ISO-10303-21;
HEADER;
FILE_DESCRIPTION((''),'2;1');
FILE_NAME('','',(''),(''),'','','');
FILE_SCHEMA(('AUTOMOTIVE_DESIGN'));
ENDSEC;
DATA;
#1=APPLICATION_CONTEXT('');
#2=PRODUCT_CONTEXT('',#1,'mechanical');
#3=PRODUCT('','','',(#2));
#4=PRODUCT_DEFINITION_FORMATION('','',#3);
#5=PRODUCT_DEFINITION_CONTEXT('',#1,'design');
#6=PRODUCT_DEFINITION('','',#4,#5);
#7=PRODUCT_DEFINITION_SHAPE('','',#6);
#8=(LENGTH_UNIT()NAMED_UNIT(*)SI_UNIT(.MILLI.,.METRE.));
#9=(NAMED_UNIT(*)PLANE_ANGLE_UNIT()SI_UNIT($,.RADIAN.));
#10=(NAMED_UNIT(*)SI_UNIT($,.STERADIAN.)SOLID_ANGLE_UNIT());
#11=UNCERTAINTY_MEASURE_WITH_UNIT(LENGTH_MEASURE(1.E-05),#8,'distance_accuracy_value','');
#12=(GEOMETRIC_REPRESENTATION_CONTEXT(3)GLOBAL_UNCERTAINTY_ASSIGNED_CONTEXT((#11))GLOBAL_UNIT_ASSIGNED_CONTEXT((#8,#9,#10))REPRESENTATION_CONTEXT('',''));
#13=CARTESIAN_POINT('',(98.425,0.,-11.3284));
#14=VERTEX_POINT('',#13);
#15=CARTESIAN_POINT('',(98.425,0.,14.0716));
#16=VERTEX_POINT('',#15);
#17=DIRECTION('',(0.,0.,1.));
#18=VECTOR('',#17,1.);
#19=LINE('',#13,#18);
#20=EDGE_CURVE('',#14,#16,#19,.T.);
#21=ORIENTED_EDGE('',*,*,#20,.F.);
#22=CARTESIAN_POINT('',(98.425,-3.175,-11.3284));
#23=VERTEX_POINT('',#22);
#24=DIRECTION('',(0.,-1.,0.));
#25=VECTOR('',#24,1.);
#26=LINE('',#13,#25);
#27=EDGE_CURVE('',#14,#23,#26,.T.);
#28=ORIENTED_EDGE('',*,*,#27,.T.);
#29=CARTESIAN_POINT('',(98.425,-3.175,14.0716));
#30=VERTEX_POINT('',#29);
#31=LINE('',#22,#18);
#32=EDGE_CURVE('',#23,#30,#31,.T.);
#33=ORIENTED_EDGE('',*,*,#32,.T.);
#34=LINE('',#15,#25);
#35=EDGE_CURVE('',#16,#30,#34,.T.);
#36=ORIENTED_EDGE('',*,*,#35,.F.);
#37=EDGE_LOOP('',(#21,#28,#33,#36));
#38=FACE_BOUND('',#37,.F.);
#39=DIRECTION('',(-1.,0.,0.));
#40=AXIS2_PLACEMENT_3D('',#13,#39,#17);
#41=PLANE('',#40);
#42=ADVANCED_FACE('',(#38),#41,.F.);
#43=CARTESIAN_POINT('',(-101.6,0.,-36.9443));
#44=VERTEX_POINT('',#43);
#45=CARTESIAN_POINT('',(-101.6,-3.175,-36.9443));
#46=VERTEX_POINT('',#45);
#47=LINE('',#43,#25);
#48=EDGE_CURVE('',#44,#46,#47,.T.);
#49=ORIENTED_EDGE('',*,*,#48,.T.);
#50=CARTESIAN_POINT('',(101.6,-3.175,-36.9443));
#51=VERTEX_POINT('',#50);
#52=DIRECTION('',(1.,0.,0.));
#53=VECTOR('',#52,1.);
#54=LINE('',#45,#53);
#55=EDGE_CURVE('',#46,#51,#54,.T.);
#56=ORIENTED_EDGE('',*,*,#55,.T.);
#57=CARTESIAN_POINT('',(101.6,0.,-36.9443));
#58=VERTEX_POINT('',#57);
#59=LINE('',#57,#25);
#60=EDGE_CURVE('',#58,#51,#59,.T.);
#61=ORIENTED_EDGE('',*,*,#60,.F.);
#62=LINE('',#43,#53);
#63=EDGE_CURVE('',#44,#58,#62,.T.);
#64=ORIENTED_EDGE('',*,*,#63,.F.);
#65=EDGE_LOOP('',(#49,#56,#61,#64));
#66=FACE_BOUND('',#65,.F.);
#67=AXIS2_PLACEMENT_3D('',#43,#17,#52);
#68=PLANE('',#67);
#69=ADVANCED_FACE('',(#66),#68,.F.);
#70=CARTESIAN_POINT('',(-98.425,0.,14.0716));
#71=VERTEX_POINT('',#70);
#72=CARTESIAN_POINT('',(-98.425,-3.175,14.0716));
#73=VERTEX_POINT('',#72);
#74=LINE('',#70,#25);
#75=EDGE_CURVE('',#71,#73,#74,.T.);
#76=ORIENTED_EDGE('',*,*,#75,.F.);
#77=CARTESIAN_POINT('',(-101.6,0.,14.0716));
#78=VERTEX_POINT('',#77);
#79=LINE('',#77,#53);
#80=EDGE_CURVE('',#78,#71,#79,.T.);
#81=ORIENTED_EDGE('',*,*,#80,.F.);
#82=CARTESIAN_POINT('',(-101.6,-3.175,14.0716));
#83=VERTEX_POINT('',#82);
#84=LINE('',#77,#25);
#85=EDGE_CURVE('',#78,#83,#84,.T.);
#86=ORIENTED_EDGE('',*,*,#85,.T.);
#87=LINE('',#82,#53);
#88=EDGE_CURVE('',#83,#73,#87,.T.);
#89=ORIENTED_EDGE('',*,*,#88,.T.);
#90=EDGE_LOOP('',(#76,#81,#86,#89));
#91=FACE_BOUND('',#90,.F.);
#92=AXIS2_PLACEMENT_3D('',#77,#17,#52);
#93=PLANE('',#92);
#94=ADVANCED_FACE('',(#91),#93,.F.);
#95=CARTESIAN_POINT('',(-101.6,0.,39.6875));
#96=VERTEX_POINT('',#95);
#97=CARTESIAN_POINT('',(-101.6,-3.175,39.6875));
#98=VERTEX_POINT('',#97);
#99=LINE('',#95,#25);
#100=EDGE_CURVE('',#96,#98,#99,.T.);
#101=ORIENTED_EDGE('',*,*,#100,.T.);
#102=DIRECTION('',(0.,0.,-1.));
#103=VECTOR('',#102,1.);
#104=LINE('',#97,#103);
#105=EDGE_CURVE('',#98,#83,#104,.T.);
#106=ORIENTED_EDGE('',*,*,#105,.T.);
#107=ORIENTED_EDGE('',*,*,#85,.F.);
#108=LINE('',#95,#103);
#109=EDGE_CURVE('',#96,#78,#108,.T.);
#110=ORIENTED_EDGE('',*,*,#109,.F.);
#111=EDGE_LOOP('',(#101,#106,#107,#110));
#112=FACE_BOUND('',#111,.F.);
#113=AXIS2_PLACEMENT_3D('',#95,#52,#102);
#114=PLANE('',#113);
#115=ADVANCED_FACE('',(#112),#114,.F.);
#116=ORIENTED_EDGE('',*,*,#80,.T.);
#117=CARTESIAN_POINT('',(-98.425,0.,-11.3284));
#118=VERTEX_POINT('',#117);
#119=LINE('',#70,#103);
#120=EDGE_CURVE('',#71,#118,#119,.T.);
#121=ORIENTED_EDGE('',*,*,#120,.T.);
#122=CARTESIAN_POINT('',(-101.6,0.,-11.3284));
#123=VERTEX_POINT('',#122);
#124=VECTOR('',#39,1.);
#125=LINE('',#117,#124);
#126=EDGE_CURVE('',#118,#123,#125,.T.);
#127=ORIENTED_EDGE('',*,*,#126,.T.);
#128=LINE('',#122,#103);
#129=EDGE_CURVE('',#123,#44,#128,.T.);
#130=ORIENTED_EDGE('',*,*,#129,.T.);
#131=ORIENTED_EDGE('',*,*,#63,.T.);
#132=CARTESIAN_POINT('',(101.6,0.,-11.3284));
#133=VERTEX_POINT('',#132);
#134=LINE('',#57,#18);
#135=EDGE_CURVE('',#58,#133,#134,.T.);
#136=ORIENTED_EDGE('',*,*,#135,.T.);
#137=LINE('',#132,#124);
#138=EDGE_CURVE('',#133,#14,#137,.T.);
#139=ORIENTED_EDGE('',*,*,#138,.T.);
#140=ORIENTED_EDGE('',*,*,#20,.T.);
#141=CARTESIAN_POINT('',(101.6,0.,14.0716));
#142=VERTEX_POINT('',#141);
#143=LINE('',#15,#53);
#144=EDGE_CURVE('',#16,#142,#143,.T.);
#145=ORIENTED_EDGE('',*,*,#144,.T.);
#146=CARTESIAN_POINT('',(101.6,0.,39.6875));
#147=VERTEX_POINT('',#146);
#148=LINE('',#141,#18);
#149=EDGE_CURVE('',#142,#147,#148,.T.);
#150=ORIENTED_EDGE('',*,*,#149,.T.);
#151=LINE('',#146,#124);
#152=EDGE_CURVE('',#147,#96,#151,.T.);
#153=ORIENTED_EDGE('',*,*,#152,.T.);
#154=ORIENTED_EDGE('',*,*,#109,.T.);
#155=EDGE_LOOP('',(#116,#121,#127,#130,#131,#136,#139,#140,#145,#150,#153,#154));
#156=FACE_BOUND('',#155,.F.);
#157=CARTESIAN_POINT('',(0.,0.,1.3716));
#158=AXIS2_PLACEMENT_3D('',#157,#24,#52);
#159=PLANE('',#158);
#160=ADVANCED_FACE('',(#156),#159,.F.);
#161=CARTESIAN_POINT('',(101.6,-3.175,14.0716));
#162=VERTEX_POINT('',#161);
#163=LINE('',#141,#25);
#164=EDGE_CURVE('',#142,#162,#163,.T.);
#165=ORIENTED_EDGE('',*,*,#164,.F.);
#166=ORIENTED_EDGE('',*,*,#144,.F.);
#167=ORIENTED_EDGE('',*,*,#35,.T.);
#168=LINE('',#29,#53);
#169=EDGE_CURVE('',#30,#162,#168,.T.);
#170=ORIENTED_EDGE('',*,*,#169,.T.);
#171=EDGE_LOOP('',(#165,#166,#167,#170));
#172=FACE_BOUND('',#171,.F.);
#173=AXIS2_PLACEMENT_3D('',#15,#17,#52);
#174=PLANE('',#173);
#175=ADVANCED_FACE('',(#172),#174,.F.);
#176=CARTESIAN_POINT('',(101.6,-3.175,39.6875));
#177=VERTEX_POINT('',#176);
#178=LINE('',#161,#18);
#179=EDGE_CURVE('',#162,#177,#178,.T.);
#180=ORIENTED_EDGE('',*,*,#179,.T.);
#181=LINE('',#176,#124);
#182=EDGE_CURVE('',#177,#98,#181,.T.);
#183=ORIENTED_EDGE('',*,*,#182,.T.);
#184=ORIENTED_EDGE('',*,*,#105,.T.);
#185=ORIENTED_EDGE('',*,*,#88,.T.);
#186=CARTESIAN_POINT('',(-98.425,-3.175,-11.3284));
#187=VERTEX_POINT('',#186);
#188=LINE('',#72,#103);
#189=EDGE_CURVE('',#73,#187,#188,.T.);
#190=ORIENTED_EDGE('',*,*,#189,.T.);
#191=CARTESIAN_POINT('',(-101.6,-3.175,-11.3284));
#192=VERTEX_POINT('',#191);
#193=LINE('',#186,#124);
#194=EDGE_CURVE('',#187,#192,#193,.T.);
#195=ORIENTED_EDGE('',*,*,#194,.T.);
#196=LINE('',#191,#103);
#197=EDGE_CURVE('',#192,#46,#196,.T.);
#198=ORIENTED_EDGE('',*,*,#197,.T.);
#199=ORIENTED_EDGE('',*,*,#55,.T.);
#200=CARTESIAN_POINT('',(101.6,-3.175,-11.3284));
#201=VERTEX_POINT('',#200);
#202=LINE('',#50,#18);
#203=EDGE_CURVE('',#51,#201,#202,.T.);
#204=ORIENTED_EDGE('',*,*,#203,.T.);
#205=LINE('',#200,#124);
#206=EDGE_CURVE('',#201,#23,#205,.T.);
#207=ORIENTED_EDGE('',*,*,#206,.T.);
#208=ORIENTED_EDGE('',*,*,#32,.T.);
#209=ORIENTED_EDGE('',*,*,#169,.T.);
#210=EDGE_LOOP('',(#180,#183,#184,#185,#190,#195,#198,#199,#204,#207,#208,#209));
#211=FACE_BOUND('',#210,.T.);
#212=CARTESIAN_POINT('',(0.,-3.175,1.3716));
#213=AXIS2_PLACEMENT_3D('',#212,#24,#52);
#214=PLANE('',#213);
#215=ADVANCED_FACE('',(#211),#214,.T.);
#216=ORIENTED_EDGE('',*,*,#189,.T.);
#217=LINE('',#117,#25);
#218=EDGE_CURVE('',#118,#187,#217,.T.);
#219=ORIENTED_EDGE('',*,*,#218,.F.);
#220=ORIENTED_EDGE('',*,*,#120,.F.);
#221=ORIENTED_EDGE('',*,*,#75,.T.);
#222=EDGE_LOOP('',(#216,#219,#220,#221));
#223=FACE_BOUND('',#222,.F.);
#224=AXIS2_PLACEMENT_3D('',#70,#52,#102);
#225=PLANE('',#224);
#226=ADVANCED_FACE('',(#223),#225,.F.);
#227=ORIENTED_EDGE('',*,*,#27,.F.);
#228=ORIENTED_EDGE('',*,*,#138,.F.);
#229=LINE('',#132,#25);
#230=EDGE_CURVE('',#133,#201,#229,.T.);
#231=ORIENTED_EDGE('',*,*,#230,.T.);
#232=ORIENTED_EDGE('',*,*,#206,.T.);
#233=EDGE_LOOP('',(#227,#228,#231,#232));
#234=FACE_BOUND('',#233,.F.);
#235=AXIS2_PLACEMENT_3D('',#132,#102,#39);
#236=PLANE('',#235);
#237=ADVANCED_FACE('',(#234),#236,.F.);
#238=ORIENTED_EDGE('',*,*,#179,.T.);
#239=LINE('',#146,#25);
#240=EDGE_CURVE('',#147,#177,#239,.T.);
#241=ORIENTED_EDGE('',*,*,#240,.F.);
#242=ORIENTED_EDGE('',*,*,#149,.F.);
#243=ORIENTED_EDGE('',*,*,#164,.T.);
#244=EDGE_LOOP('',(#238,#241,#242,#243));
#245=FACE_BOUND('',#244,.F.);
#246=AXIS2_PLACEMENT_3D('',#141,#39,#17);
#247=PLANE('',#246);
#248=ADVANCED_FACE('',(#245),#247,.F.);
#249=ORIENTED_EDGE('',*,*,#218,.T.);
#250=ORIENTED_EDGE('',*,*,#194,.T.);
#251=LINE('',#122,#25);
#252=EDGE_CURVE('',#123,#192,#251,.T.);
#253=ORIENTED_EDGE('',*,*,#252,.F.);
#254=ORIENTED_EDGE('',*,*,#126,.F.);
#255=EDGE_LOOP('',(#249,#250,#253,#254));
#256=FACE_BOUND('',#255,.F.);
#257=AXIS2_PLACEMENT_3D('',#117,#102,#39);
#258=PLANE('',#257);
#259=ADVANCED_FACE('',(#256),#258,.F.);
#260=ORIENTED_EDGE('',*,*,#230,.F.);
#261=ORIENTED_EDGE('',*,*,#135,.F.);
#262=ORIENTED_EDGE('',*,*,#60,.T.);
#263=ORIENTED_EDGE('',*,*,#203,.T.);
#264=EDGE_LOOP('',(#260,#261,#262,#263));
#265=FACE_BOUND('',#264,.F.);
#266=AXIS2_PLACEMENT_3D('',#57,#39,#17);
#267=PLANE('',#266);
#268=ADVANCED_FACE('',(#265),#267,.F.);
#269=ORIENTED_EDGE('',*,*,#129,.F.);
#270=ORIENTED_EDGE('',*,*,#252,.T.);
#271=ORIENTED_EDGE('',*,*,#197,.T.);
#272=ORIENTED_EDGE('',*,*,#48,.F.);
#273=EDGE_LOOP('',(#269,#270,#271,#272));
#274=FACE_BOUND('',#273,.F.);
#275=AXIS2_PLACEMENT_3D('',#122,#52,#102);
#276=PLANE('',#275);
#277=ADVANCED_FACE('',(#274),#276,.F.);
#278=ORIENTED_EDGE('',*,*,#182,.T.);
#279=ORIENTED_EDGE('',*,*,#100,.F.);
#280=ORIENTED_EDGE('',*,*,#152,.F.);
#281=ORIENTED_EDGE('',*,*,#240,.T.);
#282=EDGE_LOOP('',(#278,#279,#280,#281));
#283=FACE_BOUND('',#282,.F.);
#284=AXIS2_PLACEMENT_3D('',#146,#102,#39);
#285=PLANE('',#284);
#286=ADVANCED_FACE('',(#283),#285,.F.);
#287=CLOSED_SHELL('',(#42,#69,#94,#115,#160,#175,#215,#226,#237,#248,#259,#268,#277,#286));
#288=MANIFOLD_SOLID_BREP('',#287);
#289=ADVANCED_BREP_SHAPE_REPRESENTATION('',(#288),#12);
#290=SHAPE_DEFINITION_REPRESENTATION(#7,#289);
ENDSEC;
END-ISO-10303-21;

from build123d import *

# Parameters (mm, degrees)
F1_DEPTH = 3.175


# Not quite as in the source:
# - a length typed as a fraction of an inch, garbled in the dataset ("3 / 203.2 mm" for 3/8 in), is restored


with BuildPart() as f1:
    # F0 (on Front) → F1 (new body)
    with BuildSketch(Plane.XZ):
        Polygon((-101.6, 39.6875), (-101.6, 14.2875), (-101.6, 14.1605), (-101.6, 14.0716), (-98.425, 14.0716), (-98.425, 1.3716), (-98.425, -11.3284), (-101.6, -11.3284), (-101.6, -14.1605), (-101.6, -14.2875), (-101.6, -36.9443), (0, -36.9443), (101.6, -36.9443), (101.6, -14.2875), (101.6, -14.1605), (101.6, -11.3284), (98.425, -11.3284), (98.425, 1.3716), (98.425, 14.0716), (101.6, 14.0716), (101.6, 14.1605), (101.6, 14.2875), (101.6, 39.6875), (0, 39.6875), align=None)
    extrude(amount=F1_DEPTH)


solid = f1.part
